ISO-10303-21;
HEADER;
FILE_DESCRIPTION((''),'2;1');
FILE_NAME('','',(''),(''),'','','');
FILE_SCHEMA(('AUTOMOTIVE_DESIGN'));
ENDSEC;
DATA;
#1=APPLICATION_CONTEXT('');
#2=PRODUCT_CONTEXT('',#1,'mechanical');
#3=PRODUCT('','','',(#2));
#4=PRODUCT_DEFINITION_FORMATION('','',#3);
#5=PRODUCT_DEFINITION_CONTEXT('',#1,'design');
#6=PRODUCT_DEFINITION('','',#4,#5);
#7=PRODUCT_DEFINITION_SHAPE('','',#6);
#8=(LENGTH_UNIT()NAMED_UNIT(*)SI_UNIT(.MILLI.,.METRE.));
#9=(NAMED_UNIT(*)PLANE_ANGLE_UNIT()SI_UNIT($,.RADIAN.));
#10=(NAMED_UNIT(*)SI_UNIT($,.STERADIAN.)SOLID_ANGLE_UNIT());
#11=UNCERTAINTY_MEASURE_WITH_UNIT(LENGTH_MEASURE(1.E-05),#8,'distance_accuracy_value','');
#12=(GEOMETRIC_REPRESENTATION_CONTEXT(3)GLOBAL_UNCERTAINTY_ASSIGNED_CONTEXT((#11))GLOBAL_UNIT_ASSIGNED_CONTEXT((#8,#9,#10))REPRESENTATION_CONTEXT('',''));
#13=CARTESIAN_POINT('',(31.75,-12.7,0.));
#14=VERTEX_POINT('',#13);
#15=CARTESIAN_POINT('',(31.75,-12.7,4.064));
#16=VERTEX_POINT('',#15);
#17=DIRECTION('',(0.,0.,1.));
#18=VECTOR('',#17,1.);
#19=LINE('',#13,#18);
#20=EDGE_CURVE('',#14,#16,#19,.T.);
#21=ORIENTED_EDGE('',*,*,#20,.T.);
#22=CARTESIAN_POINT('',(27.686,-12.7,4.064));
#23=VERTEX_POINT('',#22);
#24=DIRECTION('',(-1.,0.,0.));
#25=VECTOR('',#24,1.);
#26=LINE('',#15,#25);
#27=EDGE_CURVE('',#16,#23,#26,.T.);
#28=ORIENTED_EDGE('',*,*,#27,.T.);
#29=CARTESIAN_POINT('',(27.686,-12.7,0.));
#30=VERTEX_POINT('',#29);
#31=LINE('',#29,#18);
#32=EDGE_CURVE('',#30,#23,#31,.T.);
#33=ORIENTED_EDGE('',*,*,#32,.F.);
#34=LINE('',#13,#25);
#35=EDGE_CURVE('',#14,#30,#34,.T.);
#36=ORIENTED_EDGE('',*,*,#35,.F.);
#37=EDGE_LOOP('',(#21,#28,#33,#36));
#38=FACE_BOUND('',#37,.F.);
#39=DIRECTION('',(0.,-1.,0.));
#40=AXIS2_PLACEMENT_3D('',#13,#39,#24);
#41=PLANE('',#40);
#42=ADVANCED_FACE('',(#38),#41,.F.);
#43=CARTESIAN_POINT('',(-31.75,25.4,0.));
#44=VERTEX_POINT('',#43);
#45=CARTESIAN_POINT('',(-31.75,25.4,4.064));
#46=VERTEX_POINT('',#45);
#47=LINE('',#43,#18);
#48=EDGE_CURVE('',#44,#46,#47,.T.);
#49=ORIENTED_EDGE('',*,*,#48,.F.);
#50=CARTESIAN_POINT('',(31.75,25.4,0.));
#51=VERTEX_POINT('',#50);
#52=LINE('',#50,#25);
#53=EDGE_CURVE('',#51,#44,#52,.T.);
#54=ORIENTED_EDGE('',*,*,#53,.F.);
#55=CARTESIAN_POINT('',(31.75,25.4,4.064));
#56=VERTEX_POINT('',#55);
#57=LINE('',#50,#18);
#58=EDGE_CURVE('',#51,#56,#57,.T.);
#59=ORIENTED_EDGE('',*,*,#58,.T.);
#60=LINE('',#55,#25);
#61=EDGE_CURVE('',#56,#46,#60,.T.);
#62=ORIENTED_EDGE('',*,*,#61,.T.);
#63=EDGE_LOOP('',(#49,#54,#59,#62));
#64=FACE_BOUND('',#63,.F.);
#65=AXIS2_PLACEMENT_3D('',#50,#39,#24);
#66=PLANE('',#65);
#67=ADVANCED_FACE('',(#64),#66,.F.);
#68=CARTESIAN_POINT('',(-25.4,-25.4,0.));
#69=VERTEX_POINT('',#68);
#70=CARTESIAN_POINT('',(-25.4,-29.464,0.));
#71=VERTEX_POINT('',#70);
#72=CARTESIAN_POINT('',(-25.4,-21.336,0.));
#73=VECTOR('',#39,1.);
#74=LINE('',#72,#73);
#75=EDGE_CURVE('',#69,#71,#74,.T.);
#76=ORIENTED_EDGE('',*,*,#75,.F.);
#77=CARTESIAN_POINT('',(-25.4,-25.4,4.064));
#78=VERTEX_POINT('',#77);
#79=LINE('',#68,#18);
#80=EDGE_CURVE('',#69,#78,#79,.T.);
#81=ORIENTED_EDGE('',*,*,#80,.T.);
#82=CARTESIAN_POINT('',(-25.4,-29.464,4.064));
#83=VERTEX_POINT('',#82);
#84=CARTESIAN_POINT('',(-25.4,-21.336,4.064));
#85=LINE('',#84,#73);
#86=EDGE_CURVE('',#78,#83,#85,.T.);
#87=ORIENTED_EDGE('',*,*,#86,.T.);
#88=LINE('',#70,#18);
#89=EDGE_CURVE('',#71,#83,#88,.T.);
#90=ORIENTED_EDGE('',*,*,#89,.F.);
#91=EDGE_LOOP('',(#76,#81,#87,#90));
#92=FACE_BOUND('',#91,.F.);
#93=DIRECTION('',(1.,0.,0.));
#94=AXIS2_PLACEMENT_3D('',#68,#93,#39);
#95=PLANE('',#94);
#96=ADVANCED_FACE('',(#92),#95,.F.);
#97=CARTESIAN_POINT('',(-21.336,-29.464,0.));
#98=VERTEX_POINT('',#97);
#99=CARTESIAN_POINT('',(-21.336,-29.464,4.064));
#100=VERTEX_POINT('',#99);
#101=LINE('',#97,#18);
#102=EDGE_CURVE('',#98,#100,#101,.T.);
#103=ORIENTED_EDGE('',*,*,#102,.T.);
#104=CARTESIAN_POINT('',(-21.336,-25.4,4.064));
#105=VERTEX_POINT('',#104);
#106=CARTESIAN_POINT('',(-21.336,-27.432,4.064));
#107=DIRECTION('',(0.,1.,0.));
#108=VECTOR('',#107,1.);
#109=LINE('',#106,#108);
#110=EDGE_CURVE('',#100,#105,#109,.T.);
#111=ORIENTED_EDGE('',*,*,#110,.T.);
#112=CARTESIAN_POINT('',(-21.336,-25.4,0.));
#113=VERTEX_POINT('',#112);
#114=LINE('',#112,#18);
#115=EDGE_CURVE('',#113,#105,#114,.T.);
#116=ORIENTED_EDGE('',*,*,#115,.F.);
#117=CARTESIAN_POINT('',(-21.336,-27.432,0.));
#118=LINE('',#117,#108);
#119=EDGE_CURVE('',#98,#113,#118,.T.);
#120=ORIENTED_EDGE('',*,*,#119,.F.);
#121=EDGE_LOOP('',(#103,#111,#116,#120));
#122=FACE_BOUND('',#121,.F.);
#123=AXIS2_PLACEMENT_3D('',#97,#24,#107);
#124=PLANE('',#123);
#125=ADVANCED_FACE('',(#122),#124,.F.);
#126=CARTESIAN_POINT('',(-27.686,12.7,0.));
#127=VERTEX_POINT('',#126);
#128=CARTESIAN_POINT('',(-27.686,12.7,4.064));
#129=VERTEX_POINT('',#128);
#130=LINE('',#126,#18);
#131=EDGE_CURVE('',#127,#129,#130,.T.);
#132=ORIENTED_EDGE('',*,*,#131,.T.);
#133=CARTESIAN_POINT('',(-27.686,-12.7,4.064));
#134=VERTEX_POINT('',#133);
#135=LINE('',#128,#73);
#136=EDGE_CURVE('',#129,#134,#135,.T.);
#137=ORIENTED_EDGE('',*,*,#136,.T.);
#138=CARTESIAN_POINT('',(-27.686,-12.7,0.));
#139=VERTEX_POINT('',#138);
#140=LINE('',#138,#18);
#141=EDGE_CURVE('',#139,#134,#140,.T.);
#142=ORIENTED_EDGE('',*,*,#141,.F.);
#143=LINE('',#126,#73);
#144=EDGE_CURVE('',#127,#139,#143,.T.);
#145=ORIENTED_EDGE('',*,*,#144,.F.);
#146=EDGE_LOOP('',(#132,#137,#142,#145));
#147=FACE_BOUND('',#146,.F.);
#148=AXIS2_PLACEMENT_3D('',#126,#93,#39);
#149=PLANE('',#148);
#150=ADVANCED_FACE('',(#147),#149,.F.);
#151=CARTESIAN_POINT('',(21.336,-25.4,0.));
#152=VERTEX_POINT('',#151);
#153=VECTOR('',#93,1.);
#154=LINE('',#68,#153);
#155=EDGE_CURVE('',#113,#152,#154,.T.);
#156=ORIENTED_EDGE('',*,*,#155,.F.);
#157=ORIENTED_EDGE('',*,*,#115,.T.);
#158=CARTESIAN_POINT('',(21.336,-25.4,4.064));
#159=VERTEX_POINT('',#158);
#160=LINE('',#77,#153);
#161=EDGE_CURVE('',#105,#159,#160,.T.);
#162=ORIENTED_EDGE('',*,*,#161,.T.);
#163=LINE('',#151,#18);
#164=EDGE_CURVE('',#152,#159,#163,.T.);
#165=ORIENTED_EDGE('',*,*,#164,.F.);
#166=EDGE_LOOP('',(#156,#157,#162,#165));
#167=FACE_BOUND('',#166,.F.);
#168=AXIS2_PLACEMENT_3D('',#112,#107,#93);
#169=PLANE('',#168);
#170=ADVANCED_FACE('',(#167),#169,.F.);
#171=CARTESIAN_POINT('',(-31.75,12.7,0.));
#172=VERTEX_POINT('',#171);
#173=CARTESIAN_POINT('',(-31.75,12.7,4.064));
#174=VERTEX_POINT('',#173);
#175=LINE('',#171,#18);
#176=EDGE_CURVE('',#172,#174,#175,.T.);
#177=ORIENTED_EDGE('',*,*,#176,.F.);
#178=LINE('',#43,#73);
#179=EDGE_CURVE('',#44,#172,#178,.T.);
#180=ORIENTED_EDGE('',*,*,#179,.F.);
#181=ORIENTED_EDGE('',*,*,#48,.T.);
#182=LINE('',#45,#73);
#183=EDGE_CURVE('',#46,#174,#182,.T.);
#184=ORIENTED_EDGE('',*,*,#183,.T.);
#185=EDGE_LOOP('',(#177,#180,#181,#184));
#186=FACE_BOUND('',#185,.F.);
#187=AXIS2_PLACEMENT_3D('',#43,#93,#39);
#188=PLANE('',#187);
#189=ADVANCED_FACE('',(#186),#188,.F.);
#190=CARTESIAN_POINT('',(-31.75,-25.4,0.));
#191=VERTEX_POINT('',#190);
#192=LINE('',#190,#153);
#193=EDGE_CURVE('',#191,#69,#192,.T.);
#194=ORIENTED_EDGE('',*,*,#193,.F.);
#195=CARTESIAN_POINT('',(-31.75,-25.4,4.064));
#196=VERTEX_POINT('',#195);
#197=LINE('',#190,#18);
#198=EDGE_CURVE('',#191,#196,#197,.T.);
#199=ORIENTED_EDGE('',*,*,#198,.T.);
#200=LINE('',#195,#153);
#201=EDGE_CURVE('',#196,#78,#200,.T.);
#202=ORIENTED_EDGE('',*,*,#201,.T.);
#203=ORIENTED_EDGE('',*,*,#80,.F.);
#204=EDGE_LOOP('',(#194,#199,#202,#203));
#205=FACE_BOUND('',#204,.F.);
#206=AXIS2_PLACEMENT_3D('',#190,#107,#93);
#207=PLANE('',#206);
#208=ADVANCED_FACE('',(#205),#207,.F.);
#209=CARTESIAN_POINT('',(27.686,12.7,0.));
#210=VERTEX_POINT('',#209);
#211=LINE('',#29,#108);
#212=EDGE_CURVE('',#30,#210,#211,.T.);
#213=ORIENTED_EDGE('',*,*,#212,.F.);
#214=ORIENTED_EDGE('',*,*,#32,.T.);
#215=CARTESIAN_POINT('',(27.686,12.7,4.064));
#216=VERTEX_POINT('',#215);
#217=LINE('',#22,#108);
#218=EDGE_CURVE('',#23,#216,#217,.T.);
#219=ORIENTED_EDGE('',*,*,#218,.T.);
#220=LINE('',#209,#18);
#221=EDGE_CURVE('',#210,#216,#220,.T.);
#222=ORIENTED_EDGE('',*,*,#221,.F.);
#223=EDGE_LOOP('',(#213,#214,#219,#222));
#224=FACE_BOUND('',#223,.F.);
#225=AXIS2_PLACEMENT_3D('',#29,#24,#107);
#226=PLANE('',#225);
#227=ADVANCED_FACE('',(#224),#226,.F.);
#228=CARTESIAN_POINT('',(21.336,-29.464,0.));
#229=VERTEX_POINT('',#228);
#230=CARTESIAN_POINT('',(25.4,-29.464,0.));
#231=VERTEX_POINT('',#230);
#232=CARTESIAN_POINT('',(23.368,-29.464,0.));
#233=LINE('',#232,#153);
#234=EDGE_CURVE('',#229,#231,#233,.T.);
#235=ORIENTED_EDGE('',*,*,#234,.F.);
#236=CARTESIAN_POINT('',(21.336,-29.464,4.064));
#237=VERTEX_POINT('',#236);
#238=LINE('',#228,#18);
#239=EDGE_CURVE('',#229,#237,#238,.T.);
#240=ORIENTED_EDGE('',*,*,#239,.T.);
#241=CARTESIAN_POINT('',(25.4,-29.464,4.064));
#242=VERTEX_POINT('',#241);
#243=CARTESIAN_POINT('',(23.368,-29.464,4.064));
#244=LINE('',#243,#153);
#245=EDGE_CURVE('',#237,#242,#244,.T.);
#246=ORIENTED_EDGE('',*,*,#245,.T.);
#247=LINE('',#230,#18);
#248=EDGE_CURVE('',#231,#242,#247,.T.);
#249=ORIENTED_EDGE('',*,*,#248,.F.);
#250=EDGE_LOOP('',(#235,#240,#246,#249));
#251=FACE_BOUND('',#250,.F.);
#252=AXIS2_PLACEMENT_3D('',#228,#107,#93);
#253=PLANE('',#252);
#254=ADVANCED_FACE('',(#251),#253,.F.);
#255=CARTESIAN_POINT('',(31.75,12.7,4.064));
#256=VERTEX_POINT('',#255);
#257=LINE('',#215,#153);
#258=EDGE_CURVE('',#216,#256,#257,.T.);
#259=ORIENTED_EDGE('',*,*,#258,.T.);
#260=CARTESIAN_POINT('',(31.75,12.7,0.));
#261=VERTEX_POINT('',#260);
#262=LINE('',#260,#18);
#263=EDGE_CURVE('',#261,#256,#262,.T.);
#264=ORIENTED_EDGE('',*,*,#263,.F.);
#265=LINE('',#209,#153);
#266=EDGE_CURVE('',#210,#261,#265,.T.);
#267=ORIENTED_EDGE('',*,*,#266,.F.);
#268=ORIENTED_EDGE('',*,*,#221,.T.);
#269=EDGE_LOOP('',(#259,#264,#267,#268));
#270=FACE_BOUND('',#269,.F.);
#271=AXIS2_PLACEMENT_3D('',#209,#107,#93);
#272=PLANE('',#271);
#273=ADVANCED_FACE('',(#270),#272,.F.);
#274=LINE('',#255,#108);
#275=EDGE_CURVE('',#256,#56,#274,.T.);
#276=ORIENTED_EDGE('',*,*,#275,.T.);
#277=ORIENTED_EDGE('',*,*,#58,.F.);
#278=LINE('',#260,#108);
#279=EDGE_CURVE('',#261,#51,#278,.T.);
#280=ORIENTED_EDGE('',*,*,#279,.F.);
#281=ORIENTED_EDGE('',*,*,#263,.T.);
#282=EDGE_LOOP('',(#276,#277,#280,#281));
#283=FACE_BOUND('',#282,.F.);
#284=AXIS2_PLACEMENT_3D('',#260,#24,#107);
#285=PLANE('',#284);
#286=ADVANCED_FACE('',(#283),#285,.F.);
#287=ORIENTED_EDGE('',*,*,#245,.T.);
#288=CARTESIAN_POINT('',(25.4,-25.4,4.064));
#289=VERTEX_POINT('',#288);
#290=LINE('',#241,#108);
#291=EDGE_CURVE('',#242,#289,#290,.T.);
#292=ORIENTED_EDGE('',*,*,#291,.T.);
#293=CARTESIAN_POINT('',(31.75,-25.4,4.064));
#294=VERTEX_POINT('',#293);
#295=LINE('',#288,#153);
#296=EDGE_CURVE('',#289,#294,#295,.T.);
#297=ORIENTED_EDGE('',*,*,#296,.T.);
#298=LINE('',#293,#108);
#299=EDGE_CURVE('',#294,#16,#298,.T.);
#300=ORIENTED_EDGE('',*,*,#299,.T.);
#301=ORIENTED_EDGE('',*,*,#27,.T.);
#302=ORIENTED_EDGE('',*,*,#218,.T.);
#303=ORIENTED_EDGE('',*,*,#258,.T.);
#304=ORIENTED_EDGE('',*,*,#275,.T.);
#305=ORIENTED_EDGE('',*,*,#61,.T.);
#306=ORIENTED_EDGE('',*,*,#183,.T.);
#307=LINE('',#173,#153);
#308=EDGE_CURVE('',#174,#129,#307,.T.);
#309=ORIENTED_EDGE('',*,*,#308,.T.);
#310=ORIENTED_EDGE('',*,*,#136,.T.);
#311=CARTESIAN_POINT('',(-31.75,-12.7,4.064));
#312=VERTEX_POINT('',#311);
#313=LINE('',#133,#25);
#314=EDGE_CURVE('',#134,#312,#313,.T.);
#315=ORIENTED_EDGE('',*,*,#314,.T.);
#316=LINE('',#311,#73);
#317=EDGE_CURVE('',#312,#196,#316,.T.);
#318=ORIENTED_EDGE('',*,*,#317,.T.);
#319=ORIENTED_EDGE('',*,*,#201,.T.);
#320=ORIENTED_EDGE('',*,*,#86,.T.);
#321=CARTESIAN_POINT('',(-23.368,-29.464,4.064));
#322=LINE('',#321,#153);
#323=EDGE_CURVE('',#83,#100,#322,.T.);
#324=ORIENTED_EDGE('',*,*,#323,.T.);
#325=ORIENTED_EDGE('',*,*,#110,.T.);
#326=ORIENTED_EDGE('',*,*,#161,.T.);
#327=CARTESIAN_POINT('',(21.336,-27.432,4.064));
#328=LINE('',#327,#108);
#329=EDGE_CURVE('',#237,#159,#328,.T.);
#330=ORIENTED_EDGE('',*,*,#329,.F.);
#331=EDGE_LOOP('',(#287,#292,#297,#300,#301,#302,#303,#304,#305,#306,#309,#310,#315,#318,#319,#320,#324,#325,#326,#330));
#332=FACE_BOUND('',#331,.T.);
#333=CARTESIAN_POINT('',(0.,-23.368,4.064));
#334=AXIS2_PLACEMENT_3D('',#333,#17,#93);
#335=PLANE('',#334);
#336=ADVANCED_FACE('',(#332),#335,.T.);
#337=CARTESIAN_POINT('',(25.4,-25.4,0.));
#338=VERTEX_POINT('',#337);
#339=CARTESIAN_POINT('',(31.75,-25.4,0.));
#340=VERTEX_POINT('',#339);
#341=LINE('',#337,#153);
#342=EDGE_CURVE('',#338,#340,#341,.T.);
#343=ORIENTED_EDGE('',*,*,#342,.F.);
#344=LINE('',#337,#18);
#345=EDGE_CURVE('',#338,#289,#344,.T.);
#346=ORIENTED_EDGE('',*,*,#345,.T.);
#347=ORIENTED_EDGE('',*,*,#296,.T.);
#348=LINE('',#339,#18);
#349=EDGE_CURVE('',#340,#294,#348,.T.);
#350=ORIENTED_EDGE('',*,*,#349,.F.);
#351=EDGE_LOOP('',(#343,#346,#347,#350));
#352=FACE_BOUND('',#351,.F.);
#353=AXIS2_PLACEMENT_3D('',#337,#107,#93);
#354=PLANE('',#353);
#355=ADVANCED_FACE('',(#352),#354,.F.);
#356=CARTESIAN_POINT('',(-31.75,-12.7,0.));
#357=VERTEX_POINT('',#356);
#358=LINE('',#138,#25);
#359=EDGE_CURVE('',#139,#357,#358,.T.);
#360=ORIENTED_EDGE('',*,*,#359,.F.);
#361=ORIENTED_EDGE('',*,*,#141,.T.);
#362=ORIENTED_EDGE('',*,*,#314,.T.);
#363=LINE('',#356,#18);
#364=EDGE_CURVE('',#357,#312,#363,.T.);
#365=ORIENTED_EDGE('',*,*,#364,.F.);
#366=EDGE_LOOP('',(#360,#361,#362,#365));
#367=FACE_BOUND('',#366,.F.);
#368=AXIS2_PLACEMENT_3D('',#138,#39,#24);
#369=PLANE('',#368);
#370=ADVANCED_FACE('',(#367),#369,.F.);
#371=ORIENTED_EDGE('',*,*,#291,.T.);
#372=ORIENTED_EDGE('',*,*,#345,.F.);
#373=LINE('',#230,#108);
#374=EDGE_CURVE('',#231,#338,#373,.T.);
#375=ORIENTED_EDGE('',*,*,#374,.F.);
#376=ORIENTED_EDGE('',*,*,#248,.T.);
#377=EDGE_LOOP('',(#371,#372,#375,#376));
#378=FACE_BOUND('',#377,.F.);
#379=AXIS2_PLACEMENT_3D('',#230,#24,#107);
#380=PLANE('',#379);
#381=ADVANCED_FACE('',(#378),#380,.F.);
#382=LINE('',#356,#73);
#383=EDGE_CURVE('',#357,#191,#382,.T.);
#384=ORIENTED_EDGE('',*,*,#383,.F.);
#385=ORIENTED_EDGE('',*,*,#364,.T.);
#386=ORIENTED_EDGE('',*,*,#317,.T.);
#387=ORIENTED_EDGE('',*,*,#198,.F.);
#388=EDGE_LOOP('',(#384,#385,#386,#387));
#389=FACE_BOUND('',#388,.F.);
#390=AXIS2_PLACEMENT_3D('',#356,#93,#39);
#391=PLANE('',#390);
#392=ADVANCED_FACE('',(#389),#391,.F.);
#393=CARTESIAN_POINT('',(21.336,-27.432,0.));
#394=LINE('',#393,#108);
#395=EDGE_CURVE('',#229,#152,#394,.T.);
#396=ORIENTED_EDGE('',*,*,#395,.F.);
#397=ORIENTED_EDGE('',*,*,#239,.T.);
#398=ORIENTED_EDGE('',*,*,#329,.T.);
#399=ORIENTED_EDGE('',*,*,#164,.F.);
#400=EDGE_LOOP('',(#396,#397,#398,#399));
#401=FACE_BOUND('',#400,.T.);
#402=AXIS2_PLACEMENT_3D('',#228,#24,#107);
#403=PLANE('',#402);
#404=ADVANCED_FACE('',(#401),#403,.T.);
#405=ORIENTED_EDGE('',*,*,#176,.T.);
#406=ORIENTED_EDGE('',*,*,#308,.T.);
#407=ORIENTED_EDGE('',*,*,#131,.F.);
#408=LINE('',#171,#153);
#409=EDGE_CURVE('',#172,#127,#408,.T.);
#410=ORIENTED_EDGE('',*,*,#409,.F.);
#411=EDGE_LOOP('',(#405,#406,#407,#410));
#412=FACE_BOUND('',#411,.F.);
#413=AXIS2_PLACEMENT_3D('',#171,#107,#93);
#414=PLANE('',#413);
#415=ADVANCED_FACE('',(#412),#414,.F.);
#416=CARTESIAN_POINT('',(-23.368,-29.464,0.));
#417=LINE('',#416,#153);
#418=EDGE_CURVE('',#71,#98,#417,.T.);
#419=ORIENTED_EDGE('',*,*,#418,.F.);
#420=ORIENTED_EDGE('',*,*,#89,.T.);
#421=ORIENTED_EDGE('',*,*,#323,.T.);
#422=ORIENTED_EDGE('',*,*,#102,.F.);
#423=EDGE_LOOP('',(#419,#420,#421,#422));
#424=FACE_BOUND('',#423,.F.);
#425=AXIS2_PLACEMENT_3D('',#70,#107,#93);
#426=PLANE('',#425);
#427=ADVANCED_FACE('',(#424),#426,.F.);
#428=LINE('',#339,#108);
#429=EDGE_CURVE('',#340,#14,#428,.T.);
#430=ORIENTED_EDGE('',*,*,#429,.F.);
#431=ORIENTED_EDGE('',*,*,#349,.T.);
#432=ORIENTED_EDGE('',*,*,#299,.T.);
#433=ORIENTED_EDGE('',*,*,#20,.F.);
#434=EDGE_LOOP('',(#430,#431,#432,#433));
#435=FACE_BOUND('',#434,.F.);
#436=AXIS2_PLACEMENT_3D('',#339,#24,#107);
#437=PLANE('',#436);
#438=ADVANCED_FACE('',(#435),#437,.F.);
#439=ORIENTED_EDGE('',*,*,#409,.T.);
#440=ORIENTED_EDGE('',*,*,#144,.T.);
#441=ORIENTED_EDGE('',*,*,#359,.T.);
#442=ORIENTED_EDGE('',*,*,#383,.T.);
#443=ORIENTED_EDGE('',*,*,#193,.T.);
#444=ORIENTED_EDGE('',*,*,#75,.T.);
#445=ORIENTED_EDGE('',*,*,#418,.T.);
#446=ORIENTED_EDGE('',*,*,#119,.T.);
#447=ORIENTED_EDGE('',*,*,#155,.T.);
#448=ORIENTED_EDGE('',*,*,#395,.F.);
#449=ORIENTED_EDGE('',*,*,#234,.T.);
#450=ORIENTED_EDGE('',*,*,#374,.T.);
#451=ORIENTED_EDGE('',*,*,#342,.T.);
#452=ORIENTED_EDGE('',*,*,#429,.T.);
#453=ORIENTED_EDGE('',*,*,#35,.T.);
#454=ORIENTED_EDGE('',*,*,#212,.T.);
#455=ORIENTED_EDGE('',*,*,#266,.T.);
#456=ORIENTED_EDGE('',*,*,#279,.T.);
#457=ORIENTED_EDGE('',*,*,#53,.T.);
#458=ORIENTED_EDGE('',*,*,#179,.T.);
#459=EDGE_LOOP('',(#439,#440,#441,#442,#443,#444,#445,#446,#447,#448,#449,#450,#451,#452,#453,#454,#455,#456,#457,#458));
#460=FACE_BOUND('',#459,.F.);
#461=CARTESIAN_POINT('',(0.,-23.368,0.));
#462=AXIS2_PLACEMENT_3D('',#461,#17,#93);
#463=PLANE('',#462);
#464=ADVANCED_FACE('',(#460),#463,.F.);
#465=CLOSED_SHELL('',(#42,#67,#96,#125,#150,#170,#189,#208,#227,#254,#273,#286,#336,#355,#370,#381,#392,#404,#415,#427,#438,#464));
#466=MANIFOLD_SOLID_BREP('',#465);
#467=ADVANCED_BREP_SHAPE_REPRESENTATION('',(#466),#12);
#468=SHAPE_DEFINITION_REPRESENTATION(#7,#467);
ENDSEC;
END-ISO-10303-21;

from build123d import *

# Parameters (mm, degrees)
F1_DEPTH = 4.064
F0_W     = 4.064
F0_H     = 4.064
F2_DEPTH = 4.064


# Not quite as in the source:
# - a feature names something its author has since deleted; it is built from what else it names


with BuildPart() as f1:
    # F0 (on Top) → F1 (new body)
    with BuildSketch(Plane.XY):
        Polygon((31.75, 12.7), (31.75, 25.4), (-31.75, 25.4), (-31.75, 12.7), (-27.686, 12.7), (-27.686, -12.7), (-31.75, -12.7), (-31.75, -25.4), (-25.4, -25.4), (-25.4, -21.336), (25.4, -21.336), (25.4, -25.4), (31.75, -25.4), (31.75, -12.7), (27.686, -12.7), (27.686, 12.7), align=None)
    extrude(amount=F1_DEPTH)

    # F0 (on Top) → F2 (join)
    with BuildSketch(Plane.XY):
        Polygon((21.336, -25.4), (25.4, -25.4), (25.4, -21.336), (-25.4, -21.336), (-25.4, -25.4), (-21.336, -25.4), align=None)
        with Locations((23.368, -27.432)):
            Rectangle(F0_W, F0_H)
        with Locations((-23.368, -27.432)):
            Rectangle(F0_W, F0_H)
        Polygon((31.75, 12.7), (31.75, 25.4), (-31.75, 25.4), (-31.75, 12.7), (-27.686, 12.7), (-27.686, -12.7), (-31.75, -12.7), (-31.75, -25.4), (-25.4, -25.4), (-25.4, -21.336), (25.4, -21.336), (25.4, -25.4), (31.75, -25.4), (31.75, -12.7), (27.686, -12.7), (27.686, 12.7), align=None)
    extrude(amount=F2_DEPTH)


solid = f1.part
